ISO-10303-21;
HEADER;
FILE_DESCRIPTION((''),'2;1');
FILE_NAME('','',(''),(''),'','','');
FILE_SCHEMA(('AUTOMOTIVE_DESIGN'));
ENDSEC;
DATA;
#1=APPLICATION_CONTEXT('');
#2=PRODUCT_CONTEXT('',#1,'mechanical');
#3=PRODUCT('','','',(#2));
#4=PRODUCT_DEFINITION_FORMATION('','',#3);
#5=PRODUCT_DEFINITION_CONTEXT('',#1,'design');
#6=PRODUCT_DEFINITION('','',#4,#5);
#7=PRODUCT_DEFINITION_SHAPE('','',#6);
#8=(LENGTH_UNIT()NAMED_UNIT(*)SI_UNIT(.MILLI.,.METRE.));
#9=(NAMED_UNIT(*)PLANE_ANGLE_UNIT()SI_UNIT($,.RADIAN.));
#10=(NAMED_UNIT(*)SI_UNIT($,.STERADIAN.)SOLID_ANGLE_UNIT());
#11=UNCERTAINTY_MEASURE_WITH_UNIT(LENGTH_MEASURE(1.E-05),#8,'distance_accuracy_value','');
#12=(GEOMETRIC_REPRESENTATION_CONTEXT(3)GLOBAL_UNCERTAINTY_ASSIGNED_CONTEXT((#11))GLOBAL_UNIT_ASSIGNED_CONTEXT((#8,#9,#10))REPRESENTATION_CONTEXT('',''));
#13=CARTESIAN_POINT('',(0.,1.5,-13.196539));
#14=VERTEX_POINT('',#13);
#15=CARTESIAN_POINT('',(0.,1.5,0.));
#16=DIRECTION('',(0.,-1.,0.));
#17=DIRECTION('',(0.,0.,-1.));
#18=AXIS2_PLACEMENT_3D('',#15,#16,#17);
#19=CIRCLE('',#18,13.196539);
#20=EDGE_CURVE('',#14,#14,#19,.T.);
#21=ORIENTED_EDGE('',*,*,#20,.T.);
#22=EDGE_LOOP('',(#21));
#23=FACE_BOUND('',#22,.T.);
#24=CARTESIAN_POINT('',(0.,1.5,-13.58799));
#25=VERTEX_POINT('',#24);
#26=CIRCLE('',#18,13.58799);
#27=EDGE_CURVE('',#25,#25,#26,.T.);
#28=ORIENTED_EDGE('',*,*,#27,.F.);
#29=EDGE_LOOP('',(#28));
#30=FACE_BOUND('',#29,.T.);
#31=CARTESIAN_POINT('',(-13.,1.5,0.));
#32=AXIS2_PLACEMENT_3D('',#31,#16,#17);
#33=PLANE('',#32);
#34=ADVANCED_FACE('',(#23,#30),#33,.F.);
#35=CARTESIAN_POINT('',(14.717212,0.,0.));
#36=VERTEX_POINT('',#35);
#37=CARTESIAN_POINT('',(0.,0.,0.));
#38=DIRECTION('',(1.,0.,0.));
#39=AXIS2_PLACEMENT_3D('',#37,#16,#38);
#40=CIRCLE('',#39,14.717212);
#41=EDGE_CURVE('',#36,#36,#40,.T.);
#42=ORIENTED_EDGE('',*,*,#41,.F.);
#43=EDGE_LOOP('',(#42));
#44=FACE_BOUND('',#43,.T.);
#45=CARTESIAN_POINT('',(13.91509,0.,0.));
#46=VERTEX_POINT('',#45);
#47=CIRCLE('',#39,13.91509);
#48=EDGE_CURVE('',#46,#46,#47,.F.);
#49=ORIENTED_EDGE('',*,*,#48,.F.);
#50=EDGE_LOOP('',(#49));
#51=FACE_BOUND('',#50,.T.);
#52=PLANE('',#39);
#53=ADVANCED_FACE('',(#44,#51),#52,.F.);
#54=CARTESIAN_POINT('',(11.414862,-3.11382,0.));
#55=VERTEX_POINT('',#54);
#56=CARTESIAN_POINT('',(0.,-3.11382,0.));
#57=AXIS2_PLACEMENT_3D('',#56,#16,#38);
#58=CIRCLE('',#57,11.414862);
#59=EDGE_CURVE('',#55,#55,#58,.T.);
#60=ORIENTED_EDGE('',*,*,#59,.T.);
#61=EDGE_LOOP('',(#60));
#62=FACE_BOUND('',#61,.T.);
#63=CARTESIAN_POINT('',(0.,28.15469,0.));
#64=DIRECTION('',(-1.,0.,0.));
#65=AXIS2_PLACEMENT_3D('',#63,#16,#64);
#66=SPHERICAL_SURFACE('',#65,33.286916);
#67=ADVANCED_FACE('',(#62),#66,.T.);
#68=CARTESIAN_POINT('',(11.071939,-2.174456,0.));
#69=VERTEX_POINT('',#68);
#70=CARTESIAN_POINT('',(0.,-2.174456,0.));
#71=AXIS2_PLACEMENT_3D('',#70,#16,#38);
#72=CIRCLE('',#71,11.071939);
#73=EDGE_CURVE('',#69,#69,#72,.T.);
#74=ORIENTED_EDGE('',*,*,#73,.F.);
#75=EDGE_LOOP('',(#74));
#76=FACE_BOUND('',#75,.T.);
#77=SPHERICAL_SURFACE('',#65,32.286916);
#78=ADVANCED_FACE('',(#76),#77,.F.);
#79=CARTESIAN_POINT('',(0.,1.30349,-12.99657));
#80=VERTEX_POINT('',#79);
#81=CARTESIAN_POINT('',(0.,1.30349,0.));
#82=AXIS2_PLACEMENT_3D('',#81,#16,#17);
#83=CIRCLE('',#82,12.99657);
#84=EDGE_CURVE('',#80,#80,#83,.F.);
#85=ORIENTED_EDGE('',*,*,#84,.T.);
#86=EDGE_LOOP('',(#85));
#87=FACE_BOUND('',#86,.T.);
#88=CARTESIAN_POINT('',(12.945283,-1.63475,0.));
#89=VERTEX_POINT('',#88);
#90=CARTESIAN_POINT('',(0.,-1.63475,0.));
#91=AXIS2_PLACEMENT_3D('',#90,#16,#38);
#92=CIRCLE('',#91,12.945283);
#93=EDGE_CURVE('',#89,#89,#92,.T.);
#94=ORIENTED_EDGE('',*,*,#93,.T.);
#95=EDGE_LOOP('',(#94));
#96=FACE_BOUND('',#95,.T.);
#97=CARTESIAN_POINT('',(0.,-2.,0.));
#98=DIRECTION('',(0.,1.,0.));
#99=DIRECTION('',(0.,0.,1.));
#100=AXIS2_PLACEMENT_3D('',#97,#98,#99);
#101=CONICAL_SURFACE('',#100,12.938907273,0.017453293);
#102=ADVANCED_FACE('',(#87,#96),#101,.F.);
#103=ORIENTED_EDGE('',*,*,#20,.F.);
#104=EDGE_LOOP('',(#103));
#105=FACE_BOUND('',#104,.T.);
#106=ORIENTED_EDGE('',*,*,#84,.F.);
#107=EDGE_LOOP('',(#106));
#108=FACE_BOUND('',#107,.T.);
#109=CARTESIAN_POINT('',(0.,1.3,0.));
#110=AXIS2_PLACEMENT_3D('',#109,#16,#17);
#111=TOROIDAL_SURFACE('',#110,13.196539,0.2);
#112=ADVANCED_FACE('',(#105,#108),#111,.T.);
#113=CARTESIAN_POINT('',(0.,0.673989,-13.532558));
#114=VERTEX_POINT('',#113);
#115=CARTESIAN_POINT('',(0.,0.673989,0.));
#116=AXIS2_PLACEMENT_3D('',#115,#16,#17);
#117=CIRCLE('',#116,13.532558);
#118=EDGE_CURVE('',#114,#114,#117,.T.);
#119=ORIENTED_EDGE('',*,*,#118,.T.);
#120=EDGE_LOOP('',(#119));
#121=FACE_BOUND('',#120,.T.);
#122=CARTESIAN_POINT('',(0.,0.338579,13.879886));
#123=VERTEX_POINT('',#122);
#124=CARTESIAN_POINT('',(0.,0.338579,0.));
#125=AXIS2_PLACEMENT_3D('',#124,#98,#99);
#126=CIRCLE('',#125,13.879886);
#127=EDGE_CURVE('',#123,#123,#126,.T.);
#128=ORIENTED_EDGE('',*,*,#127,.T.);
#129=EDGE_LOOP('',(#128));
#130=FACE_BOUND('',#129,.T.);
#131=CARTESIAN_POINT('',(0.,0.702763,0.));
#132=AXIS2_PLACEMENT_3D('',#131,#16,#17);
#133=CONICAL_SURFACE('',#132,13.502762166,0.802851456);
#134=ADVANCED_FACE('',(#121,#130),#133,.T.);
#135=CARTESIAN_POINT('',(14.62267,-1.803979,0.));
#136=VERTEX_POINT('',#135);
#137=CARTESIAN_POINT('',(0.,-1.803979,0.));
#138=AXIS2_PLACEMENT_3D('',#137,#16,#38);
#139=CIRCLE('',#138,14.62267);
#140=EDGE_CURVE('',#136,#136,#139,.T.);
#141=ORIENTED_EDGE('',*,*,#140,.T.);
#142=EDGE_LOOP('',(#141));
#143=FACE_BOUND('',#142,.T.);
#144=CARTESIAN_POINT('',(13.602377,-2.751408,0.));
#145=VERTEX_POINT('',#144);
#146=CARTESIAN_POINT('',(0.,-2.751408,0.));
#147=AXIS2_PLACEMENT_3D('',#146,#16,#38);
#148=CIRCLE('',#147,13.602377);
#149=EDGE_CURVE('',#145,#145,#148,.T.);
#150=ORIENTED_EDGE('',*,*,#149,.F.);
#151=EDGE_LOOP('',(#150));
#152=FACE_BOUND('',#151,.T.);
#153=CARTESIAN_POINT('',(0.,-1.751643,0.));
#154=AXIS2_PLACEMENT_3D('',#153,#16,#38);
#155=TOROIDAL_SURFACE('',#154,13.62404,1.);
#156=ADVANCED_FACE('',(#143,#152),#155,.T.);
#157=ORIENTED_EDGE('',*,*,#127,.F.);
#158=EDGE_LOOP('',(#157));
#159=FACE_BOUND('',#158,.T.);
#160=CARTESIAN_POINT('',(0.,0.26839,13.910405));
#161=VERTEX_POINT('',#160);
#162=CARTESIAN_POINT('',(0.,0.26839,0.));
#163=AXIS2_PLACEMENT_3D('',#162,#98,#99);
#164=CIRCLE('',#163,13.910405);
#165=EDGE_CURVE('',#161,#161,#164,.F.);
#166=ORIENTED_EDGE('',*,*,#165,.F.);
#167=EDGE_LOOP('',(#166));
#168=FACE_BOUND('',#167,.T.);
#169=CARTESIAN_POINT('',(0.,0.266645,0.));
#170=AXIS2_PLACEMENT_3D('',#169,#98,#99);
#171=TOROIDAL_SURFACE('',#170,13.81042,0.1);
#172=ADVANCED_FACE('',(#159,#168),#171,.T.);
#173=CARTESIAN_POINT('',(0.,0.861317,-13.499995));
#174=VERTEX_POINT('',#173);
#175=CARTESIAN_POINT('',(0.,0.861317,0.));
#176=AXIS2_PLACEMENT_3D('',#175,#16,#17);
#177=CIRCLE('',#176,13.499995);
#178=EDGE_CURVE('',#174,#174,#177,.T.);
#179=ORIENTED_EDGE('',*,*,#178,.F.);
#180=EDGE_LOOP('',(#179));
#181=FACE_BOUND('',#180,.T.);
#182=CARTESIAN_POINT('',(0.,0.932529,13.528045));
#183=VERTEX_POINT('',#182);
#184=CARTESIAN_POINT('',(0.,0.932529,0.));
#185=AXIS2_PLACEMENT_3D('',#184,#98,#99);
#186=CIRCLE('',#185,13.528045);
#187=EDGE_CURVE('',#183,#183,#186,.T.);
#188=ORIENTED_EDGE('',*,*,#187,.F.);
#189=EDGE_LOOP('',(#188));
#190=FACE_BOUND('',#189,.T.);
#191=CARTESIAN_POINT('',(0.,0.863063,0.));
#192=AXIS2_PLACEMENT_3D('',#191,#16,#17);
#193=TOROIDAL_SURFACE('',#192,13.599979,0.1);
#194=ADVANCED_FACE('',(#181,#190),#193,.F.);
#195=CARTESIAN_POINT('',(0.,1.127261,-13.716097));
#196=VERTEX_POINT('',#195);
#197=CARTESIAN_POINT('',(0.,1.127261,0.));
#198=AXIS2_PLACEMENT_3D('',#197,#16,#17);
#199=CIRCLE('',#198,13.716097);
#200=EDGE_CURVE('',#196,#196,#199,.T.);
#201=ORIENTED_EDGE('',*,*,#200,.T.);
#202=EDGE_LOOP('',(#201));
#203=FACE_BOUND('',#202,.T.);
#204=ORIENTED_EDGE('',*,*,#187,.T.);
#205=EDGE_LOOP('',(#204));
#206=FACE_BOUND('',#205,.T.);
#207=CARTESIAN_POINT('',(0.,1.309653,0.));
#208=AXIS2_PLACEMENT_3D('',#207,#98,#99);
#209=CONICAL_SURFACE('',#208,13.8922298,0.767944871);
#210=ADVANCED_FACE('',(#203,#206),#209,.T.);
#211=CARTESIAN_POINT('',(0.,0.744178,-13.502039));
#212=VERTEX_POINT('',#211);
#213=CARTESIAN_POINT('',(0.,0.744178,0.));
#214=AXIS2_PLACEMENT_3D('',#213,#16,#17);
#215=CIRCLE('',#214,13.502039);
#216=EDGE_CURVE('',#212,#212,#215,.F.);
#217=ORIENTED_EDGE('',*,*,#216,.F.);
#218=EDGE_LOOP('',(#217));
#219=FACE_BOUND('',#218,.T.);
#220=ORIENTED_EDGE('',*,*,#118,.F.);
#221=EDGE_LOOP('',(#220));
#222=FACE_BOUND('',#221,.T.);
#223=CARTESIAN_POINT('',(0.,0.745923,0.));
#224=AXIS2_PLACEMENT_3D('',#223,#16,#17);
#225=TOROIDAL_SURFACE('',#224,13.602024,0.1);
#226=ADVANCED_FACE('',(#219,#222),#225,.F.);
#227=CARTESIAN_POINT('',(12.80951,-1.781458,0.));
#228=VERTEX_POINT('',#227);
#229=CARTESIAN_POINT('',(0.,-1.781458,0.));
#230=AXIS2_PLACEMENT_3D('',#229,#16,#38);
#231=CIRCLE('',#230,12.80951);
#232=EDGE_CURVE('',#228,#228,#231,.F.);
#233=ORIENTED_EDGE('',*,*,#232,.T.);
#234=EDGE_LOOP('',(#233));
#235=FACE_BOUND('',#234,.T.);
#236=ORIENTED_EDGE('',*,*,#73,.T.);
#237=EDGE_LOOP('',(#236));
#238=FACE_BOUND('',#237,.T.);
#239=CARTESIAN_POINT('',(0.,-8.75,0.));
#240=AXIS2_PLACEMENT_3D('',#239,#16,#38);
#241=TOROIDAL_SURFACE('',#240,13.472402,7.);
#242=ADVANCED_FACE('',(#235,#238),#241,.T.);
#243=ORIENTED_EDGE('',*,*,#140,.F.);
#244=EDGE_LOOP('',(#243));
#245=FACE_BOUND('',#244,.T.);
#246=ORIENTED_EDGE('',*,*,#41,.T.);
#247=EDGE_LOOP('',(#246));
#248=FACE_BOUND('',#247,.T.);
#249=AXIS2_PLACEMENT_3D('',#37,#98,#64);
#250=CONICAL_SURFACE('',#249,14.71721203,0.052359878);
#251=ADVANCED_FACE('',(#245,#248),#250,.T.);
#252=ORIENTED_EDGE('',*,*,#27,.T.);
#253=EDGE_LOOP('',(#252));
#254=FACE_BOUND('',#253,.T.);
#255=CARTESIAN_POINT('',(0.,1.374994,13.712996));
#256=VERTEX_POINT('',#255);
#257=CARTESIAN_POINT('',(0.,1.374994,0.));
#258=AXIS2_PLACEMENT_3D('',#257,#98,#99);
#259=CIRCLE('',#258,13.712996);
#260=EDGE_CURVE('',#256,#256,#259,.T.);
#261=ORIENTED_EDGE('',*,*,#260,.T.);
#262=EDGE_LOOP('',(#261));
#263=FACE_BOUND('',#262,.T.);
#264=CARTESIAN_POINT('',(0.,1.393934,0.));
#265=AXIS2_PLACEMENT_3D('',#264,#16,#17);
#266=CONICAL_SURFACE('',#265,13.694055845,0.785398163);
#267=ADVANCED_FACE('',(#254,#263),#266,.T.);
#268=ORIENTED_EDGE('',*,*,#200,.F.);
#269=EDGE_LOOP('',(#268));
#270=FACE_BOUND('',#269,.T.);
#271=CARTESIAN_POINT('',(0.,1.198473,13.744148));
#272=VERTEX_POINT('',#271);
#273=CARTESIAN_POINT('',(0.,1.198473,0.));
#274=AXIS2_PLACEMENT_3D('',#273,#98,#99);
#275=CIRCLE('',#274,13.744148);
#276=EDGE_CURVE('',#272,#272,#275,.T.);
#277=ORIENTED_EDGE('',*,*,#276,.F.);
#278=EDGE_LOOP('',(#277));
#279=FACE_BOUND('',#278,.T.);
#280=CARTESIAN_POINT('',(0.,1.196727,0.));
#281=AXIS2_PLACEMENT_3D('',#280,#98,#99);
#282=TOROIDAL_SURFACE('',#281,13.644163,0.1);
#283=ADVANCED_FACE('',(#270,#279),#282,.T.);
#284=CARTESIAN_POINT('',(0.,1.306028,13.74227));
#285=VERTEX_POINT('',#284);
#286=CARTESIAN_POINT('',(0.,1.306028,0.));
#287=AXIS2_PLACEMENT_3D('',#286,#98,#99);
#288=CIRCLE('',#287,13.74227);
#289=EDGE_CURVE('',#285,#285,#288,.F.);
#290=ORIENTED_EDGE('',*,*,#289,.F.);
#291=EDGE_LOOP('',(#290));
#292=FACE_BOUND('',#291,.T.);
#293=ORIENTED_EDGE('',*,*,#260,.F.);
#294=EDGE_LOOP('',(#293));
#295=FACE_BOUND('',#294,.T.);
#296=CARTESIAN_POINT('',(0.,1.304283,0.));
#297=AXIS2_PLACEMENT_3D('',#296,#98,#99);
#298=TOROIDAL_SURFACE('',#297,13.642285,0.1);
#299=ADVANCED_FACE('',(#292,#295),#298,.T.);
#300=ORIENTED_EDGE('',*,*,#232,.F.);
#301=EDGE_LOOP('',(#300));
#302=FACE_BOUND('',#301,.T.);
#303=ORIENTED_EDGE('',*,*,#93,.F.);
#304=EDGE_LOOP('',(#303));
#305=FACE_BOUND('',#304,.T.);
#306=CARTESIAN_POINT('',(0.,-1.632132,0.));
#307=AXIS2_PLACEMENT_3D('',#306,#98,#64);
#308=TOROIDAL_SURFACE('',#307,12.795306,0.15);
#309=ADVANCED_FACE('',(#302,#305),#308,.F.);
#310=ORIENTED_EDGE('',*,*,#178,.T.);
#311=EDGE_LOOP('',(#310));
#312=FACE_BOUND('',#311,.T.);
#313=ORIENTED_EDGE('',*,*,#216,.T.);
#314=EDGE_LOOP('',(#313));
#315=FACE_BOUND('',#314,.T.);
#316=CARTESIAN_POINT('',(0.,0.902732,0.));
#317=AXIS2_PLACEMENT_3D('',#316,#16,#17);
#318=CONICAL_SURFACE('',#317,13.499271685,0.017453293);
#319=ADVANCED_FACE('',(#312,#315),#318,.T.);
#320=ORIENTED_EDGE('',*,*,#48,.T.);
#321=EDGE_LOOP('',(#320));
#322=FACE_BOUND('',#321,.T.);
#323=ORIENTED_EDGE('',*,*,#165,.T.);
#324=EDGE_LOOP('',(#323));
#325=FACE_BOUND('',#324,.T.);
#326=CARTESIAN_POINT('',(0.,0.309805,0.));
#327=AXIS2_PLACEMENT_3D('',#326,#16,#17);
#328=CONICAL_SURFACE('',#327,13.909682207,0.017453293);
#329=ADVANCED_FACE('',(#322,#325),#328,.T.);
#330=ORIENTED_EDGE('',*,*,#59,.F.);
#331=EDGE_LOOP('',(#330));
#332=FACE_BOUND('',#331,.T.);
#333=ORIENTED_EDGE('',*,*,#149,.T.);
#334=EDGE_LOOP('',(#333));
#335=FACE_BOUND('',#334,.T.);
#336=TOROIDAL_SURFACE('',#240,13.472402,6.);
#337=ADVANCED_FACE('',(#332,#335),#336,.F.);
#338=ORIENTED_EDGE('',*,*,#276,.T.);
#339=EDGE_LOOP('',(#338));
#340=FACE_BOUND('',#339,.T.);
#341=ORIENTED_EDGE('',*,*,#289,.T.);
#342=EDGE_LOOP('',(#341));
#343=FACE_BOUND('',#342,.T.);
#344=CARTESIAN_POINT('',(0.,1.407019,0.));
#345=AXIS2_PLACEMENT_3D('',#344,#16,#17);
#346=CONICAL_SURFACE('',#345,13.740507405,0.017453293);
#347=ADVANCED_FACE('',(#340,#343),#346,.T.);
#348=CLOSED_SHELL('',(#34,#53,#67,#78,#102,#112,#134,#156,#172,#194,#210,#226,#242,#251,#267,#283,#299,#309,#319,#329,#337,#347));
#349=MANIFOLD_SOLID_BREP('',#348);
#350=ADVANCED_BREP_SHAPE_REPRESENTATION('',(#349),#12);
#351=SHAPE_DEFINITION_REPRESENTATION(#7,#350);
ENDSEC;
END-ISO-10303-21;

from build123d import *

# Parameters (mm, degrees)
SHELL1_T  = -1
FILLET2_R = 0.15
FILLET3_R = 0.2
FILLET4_R = 0.1


with BuildPart() as part:
    # Sketch3 → Revolve1 (revolve)
    with BuildSketch(Plane.XY, mode=Mode.PRIVATE) as revolve1_sk:
        with BuildLine():
            Line((0, 0), (-14.71721203, 0))
            Line((-14.71721203, 0), (-14.622669519, -1.803978578))
            ThreePointArc((-14.622669519, -1.803978578), (-14.304496998, -2.48443062), (-13.602377467, -2.751407959))
            ThreePointArc((-13.602377467, -2.751407959), (-12.49173295, -2.830685215), (-11.414862037, -3.113819746))
            ThreePointArc((-11.414862037, -3.113819746), (-5.795969269, -4.623740658), (0, -5.132225985))
            Line((0, -5.132225985), (0, 0))
        make_face()
    revolve(revolve1_sk.sketch.rotate(Axis((0, -5.132225985, 0), (0, 1, 0)), 180), axis=Axis((0, -5.132225985, 0), (0, 1, 0)))

    # Shell1
    shell1_openings = [part.faces().sort_by_distance(p)[0] for p in [
        (0, 0, 0),
    ]]
    offset(amount=SHELL1_T, openings=shell1_openings, kind=Kind.INTERSECTION)

    # Fillet1: read off the stored shape, not the designer's step
    # Fillet1 outline → Fillet1 (revolve)
    with BuildSketch(Plane.XY):
        with BuildLine():
            Line((13.648593596, -1.756499566), (13.648593596, -1.283131799))
            ThreePointArc((13.648593596, -1.283131799), (13.501190879, -1.612150966), (13.170820397, -1.756499566))
            Line((13.170820397, -1.756499566), (13.648593596, -1.756499566))
        make_face()
    revolve(axis=Axis((0, 0, 0), (0, 1, 0)))

    # Sketch4 → Revolve2 (revolve)
    with BuildSketch(Plane.XY, mode=Mode.PRIVATE) as revolve2_sk:
        Polygon((-13, 1.5), (-12.938907273, -2), (-13.95, -2), (-13.909682207, 0.309804838), (-13.502762166, 0.702762954), (-13.499271685, 0.902732493), (-13.8922298, 1.309652533), (-13.890484559, 1.409637303), (-13.800121862, 1.5), align=None)
    revolve(revolve2_sk.sketch.rotate(Axis((0, 0, 0), (0, 1, 0)), 270), axis=Axis((0, 0, 0), (0, 1, 0)))

    # Fillet2
    fillet2_edges = [part.edges().sort_by_distance(p)[0] for p in [
        (-9.152027206, -1.770053761, 9.152027206),
        (9.152027207, -1.770053761, -9.152027207),
    ]]
    fillet(fillet2_edges, radius=FILLET2_R)

    # Fillet3
    fillet3_edges = [part.edges().sort_by_distance(p)[0] for p in [
        (0, 1.5, 13),
    ]]
    fillet(fillet3_edges, radius=FILLET3_R)

    # Move Face1: read off the stored shape, not the designer's step
    # Move Face1 outline → Move Face1 (revolve, cut)
    with BuildSketch(Plane.XY):
        Polygon((13.587989828, 1.5), (13.74156509, 1.346424738), (13.744870507, 1.157057518), (13.8922298, 1.157057518), (13.8922298, 1.309652533), (13.890484559, 1.409637303), (13.800121862, 1.5), align=None)
    revolve(axis=Axis((0, 0, 0), (0, 1, 0)), mode=Mode.SUBTRACT)

    # Fillet4
    fillet4_edges = [part.edges().sort_by_distance(p)[0] for p in [
        (0, 0.309804838, 13.909682207),
        (-13.74156509, 1.346424738, 0),
        (9.719091142, 1.157057518, -9.719091142),
        (0, 0.902732493, 13.499271685),
        (0, 0.702762954, 13.502762166),
    ]]
    fillet(fillet4_edges, radius=FILLET4_R)


solid = part.part
